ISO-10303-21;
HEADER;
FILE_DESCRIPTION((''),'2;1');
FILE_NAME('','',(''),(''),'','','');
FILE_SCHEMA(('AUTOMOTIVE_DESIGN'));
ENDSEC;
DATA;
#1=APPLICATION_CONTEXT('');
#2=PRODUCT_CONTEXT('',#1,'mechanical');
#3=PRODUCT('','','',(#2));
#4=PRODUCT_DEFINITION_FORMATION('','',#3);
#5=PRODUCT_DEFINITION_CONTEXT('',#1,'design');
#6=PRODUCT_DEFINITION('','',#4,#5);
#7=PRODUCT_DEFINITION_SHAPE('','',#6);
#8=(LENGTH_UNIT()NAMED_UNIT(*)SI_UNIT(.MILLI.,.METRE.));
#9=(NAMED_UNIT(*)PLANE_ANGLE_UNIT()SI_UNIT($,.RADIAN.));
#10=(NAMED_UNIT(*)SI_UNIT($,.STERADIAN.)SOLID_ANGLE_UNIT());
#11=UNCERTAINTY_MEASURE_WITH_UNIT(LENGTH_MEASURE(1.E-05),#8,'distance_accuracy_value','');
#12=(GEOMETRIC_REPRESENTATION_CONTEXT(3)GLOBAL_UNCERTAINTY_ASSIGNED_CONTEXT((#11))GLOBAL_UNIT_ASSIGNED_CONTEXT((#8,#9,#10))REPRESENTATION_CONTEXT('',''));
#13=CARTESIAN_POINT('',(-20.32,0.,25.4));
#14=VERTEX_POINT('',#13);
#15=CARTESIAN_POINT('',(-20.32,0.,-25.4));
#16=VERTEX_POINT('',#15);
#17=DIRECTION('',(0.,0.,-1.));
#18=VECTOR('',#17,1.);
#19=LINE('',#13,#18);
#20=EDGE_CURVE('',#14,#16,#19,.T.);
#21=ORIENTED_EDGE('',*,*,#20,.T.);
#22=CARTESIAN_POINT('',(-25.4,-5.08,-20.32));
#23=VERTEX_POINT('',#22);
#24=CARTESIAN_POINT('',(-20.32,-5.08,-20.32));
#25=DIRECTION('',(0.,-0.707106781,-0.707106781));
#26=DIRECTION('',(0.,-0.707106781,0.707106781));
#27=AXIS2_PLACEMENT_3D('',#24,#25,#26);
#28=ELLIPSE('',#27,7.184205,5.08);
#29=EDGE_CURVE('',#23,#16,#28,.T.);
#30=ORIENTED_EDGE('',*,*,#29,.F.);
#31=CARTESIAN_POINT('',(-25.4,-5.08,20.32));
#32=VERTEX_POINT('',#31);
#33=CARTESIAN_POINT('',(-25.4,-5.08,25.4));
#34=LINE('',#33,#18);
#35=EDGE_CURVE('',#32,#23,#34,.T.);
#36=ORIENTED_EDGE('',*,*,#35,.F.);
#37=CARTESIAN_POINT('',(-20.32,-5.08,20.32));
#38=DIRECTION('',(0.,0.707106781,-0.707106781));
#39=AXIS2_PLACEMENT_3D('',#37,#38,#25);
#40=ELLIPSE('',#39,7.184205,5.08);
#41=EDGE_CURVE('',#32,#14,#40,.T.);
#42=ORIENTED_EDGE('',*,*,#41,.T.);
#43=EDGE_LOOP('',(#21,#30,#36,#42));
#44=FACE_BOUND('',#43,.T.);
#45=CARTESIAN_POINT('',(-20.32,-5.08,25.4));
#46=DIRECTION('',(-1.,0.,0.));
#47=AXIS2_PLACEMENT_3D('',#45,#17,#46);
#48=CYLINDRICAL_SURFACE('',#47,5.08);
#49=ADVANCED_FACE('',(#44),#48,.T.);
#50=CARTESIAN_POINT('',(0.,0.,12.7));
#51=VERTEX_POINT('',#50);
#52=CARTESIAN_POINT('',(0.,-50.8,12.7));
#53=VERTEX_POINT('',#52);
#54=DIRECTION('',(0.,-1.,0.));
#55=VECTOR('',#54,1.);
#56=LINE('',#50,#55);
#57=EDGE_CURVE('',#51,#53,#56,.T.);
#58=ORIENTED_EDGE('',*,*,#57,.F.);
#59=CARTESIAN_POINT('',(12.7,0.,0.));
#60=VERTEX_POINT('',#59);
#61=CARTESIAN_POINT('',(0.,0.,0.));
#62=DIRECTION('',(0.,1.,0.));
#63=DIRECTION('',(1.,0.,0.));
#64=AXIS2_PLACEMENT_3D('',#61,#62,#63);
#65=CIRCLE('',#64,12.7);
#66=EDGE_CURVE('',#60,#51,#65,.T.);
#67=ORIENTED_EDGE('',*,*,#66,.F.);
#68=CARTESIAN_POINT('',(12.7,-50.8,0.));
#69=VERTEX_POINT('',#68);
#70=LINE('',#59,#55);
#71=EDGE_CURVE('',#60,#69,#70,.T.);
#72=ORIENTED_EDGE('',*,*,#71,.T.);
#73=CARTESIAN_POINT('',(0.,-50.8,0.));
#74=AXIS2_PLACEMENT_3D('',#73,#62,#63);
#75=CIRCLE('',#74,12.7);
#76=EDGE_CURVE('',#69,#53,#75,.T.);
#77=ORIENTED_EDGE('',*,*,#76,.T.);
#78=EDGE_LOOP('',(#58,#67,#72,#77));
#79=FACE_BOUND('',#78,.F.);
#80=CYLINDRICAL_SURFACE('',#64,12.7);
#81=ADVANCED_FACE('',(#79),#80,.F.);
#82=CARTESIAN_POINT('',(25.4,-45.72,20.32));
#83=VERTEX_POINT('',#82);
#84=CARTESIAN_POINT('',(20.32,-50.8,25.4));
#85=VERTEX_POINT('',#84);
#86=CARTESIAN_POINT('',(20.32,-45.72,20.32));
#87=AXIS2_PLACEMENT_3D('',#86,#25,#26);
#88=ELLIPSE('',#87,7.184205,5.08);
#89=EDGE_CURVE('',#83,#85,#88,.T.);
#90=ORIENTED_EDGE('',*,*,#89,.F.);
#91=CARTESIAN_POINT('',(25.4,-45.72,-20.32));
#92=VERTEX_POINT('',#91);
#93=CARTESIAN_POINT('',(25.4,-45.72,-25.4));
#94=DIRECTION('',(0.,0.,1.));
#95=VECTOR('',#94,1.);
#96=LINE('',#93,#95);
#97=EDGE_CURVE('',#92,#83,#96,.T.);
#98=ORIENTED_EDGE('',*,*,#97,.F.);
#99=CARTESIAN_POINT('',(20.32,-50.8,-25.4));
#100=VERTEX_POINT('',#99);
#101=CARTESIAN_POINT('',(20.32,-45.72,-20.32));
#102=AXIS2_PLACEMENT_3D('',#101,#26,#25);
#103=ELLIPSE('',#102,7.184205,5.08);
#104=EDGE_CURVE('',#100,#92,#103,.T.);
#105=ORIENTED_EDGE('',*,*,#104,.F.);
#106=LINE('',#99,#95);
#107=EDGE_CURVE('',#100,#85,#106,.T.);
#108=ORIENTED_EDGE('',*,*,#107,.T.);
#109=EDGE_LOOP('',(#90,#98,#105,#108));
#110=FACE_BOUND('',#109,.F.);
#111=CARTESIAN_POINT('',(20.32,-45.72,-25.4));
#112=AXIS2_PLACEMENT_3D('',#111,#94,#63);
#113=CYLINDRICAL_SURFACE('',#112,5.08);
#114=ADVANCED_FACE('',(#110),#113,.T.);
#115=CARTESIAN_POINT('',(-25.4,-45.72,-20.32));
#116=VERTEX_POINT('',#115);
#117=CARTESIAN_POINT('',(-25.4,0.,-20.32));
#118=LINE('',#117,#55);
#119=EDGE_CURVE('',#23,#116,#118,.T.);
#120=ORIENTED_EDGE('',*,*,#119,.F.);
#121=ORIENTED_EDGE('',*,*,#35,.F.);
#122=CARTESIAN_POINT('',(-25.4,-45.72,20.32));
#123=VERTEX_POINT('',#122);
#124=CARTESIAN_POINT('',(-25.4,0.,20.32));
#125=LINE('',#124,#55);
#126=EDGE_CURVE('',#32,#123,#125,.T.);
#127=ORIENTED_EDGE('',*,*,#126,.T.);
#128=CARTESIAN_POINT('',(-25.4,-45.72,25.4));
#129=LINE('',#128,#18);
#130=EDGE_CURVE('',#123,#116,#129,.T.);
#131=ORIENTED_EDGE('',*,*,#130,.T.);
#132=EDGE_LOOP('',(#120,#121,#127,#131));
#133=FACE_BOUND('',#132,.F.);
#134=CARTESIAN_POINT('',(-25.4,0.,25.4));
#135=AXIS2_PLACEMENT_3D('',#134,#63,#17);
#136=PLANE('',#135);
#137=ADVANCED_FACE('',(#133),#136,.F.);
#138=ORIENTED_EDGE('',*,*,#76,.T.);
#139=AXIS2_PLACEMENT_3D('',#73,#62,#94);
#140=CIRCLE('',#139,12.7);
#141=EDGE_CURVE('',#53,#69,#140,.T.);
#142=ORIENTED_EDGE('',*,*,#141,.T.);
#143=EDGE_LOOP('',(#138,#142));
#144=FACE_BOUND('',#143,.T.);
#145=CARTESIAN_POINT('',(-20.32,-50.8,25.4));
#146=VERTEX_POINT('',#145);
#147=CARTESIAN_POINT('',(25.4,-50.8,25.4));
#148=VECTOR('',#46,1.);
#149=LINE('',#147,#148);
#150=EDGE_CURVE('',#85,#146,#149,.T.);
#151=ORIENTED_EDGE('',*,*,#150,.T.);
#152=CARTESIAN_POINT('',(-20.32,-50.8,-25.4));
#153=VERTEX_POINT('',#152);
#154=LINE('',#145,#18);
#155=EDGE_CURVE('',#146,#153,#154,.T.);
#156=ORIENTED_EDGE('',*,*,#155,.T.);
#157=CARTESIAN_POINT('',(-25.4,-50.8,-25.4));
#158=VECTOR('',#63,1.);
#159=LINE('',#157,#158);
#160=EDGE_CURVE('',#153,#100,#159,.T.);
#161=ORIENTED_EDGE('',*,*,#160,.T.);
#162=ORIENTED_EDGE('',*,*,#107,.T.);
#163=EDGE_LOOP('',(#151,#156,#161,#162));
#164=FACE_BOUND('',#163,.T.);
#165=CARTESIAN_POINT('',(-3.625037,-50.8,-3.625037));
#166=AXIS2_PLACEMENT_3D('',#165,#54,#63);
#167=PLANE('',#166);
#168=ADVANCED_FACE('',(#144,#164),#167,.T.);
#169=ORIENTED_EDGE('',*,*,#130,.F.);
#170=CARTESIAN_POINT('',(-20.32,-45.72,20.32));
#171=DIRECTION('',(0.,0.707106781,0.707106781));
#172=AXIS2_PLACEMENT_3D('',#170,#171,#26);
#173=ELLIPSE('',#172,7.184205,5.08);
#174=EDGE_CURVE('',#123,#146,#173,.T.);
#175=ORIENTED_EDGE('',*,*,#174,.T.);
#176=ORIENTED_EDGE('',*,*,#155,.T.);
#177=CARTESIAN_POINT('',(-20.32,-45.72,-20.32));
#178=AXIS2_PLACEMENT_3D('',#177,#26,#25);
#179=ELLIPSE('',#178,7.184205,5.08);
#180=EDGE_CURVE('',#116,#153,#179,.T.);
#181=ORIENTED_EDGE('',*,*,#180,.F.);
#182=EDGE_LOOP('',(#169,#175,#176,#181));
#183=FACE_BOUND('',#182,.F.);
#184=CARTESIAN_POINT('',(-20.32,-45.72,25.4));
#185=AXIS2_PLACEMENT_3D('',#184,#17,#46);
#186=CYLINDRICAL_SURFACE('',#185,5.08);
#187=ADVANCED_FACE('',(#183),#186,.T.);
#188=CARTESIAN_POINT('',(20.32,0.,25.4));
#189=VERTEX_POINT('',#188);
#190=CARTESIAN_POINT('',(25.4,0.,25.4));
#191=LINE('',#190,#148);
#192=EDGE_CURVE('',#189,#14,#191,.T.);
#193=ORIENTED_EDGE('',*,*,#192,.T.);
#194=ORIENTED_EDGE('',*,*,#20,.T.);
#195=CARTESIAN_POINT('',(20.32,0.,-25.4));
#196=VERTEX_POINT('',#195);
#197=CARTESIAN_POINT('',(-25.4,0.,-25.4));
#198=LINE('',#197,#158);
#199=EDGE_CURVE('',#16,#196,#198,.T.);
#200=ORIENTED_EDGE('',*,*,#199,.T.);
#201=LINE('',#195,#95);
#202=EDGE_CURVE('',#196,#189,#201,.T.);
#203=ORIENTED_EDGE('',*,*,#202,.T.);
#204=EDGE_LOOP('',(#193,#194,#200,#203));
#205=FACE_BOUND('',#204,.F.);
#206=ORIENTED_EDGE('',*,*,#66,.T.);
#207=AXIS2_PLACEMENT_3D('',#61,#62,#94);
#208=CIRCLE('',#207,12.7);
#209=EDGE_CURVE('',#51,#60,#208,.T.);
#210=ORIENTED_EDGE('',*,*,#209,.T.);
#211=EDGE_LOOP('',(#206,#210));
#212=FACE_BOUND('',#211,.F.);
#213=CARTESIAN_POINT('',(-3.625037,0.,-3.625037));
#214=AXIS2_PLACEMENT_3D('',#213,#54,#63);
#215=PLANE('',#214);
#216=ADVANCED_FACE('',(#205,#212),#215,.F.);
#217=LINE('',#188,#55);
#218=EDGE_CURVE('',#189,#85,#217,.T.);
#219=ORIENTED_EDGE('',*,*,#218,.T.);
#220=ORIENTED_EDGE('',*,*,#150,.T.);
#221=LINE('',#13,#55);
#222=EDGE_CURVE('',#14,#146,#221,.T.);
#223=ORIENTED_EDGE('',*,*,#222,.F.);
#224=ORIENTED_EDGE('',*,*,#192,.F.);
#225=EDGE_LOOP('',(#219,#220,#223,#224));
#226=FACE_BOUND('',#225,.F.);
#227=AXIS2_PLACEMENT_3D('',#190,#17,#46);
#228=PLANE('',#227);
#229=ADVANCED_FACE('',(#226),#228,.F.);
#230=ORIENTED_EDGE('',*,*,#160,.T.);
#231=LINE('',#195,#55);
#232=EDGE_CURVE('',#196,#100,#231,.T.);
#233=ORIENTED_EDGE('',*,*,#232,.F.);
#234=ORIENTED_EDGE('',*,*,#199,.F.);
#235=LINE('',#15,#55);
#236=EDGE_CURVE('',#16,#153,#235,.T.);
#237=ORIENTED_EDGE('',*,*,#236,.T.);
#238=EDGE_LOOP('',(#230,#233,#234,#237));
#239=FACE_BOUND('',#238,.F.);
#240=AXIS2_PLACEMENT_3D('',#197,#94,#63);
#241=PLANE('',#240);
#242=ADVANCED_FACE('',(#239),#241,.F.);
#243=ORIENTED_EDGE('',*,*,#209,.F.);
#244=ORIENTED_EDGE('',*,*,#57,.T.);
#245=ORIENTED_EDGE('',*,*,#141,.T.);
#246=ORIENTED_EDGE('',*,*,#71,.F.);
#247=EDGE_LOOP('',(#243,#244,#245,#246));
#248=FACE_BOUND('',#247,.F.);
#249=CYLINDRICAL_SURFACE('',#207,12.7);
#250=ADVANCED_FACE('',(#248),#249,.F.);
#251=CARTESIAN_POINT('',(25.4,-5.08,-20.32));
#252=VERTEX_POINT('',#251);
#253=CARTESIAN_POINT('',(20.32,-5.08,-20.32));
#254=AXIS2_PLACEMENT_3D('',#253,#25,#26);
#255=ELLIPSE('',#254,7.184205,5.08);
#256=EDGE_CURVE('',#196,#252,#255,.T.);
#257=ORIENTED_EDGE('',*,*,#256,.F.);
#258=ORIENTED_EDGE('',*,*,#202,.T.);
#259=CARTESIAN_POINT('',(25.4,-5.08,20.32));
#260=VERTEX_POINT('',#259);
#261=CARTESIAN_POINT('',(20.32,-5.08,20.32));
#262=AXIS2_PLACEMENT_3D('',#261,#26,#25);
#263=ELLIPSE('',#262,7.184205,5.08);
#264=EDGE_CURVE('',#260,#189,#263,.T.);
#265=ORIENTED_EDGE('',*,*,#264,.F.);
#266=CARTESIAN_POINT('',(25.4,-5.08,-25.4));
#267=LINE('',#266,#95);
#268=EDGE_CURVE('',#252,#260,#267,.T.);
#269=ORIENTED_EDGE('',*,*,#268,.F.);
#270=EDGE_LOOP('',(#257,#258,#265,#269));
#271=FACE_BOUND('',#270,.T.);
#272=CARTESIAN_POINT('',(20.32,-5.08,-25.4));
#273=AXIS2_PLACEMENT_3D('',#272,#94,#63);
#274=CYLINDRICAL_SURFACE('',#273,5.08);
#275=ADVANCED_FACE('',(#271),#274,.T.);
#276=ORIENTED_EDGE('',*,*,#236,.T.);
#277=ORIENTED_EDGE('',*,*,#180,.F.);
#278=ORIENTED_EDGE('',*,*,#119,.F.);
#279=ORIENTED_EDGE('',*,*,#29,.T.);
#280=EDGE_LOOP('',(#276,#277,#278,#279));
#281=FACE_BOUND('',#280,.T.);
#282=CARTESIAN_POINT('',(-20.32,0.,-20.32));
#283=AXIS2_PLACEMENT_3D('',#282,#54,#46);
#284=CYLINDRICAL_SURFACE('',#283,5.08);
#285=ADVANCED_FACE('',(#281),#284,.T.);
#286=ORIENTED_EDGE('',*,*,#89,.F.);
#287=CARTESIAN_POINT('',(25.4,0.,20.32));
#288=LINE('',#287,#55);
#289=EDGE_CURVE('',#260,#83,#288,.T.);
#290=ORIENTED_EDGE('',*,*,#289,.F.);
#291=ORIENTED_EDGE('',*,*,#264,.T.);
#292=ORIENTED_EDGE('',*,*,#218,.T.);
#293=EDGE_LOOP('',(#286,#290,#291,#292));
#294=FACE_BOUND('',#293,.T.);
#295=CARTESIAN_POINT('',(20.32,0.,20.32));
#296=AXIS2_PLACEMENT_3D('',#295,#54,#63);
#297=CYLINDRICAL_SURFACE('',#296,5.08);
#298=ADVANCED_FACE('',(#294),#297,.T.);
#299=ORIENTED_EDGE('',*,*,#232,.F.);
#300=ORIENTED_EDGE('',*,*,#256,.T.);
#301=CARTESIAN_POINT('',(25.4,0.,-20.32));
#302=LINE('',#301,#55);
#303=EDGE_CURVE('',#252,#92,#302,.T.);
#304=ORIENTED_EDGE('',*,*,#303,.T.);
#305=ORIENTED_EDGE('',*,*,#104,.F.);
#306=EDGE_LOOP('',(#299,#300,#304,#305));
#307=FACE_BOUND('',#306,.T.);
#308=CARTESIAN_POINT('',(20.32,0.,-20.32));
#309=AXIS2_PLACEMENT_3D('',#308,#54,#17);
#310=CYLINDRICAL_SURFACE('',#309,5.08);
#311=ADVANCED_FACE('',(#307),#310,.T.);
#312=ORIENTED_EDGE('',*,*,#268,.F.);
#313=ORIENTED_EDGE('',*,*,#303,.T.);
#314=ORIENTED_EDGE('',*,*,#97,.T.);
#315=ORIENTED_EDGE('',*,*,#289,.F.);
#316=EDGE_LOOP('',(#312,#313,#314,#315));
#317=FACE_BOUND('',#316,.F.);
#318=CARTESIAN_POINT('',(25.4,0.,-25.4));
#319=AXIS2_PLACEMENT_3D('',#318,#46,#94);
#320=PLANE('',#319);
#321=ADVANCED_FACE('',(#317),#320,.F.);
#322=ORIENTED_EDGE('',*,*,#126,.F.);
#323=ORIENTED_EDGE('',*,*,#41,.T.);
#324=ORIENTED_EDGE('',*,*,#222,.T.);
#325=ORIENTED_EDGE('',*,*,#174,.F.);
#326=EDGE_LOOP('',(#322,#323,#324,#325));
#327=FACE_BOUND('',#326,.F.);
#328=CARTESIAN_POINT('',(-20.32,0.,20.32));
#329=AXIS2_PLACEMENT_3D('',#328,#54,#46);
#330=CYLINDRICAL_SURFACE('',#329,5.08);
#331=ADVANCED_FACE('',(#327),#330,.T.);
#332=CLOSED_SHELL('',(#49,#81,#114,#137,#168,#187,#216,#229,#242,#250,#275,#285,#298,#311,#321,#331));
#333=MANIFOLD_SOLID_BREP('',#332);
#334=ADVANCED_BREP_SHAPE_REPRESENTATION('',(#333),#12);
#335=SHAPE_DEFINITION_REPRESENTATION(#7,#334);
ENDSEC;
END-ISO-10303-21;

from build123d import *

# Parameters (mm, degrees)
F1_DEPTH = 50.8
F3_R     = 5.08


# Not quite as in the source:
# - the program builds the solid bodies; features that only make, move or delete a surface that nothing else refers to are left out


with BuildPart() as f1:
    # F0 (on Front) → F1 (new body)
    with BuildSketch(Plane.XZ):
        with BuildLine():
            Line((25.4, 0), (12.7, 0))
            ThreePointArc((12.7, 0), (-8.9802561211, -8.9802561211), (0, 12.7))
            Line((0, 12.7), (0, 25.4))
            Line((0, 25.4), (-25.4, 25.4))
            Line((-25.4, 25.4), (-25.4, 0))
            Line((-25.4, 0), (-25.4, -25.4))
            Line((-25.4, -25.4), (0, -25.4))
            Line((0, -25.4), (25.4, -25.4))
            Line((25.4, -25.4), (25.4, 0))
        make_face()
        with BuildLine():
            ThreePointArc((0, 12.7), (8.9802561211, 8.9802561211), (12.7, 0))
            Line((12.7, 0), (25.4, 0))
            Line((25.4, 0), (25.4, 25.4))
            Line((25.4, 25.4), (0, 25.4))
            Line((0, 25.4), (0, 12.7))
        make_face()
    extrude(amount=F1_DEPTH)

    # F3
    f3_edges = [f1.edges().sort_by_distance(p)[0] for p in [
        (-25.4, -25.4, 25.4),
        (25.4, -25.4, 25.4),
        (-25.4, -25.4, -25.4),
        (25.4, -25.4, -25.4),
        (25.4, 0, 0),
        (-25.4, 0, 0),
        (-25.4, -50.8, 0),
        (25.4, -50.8, 0),
    ]]
    fillet(f3_edges, radius=F3_R)


solid = f1.part
